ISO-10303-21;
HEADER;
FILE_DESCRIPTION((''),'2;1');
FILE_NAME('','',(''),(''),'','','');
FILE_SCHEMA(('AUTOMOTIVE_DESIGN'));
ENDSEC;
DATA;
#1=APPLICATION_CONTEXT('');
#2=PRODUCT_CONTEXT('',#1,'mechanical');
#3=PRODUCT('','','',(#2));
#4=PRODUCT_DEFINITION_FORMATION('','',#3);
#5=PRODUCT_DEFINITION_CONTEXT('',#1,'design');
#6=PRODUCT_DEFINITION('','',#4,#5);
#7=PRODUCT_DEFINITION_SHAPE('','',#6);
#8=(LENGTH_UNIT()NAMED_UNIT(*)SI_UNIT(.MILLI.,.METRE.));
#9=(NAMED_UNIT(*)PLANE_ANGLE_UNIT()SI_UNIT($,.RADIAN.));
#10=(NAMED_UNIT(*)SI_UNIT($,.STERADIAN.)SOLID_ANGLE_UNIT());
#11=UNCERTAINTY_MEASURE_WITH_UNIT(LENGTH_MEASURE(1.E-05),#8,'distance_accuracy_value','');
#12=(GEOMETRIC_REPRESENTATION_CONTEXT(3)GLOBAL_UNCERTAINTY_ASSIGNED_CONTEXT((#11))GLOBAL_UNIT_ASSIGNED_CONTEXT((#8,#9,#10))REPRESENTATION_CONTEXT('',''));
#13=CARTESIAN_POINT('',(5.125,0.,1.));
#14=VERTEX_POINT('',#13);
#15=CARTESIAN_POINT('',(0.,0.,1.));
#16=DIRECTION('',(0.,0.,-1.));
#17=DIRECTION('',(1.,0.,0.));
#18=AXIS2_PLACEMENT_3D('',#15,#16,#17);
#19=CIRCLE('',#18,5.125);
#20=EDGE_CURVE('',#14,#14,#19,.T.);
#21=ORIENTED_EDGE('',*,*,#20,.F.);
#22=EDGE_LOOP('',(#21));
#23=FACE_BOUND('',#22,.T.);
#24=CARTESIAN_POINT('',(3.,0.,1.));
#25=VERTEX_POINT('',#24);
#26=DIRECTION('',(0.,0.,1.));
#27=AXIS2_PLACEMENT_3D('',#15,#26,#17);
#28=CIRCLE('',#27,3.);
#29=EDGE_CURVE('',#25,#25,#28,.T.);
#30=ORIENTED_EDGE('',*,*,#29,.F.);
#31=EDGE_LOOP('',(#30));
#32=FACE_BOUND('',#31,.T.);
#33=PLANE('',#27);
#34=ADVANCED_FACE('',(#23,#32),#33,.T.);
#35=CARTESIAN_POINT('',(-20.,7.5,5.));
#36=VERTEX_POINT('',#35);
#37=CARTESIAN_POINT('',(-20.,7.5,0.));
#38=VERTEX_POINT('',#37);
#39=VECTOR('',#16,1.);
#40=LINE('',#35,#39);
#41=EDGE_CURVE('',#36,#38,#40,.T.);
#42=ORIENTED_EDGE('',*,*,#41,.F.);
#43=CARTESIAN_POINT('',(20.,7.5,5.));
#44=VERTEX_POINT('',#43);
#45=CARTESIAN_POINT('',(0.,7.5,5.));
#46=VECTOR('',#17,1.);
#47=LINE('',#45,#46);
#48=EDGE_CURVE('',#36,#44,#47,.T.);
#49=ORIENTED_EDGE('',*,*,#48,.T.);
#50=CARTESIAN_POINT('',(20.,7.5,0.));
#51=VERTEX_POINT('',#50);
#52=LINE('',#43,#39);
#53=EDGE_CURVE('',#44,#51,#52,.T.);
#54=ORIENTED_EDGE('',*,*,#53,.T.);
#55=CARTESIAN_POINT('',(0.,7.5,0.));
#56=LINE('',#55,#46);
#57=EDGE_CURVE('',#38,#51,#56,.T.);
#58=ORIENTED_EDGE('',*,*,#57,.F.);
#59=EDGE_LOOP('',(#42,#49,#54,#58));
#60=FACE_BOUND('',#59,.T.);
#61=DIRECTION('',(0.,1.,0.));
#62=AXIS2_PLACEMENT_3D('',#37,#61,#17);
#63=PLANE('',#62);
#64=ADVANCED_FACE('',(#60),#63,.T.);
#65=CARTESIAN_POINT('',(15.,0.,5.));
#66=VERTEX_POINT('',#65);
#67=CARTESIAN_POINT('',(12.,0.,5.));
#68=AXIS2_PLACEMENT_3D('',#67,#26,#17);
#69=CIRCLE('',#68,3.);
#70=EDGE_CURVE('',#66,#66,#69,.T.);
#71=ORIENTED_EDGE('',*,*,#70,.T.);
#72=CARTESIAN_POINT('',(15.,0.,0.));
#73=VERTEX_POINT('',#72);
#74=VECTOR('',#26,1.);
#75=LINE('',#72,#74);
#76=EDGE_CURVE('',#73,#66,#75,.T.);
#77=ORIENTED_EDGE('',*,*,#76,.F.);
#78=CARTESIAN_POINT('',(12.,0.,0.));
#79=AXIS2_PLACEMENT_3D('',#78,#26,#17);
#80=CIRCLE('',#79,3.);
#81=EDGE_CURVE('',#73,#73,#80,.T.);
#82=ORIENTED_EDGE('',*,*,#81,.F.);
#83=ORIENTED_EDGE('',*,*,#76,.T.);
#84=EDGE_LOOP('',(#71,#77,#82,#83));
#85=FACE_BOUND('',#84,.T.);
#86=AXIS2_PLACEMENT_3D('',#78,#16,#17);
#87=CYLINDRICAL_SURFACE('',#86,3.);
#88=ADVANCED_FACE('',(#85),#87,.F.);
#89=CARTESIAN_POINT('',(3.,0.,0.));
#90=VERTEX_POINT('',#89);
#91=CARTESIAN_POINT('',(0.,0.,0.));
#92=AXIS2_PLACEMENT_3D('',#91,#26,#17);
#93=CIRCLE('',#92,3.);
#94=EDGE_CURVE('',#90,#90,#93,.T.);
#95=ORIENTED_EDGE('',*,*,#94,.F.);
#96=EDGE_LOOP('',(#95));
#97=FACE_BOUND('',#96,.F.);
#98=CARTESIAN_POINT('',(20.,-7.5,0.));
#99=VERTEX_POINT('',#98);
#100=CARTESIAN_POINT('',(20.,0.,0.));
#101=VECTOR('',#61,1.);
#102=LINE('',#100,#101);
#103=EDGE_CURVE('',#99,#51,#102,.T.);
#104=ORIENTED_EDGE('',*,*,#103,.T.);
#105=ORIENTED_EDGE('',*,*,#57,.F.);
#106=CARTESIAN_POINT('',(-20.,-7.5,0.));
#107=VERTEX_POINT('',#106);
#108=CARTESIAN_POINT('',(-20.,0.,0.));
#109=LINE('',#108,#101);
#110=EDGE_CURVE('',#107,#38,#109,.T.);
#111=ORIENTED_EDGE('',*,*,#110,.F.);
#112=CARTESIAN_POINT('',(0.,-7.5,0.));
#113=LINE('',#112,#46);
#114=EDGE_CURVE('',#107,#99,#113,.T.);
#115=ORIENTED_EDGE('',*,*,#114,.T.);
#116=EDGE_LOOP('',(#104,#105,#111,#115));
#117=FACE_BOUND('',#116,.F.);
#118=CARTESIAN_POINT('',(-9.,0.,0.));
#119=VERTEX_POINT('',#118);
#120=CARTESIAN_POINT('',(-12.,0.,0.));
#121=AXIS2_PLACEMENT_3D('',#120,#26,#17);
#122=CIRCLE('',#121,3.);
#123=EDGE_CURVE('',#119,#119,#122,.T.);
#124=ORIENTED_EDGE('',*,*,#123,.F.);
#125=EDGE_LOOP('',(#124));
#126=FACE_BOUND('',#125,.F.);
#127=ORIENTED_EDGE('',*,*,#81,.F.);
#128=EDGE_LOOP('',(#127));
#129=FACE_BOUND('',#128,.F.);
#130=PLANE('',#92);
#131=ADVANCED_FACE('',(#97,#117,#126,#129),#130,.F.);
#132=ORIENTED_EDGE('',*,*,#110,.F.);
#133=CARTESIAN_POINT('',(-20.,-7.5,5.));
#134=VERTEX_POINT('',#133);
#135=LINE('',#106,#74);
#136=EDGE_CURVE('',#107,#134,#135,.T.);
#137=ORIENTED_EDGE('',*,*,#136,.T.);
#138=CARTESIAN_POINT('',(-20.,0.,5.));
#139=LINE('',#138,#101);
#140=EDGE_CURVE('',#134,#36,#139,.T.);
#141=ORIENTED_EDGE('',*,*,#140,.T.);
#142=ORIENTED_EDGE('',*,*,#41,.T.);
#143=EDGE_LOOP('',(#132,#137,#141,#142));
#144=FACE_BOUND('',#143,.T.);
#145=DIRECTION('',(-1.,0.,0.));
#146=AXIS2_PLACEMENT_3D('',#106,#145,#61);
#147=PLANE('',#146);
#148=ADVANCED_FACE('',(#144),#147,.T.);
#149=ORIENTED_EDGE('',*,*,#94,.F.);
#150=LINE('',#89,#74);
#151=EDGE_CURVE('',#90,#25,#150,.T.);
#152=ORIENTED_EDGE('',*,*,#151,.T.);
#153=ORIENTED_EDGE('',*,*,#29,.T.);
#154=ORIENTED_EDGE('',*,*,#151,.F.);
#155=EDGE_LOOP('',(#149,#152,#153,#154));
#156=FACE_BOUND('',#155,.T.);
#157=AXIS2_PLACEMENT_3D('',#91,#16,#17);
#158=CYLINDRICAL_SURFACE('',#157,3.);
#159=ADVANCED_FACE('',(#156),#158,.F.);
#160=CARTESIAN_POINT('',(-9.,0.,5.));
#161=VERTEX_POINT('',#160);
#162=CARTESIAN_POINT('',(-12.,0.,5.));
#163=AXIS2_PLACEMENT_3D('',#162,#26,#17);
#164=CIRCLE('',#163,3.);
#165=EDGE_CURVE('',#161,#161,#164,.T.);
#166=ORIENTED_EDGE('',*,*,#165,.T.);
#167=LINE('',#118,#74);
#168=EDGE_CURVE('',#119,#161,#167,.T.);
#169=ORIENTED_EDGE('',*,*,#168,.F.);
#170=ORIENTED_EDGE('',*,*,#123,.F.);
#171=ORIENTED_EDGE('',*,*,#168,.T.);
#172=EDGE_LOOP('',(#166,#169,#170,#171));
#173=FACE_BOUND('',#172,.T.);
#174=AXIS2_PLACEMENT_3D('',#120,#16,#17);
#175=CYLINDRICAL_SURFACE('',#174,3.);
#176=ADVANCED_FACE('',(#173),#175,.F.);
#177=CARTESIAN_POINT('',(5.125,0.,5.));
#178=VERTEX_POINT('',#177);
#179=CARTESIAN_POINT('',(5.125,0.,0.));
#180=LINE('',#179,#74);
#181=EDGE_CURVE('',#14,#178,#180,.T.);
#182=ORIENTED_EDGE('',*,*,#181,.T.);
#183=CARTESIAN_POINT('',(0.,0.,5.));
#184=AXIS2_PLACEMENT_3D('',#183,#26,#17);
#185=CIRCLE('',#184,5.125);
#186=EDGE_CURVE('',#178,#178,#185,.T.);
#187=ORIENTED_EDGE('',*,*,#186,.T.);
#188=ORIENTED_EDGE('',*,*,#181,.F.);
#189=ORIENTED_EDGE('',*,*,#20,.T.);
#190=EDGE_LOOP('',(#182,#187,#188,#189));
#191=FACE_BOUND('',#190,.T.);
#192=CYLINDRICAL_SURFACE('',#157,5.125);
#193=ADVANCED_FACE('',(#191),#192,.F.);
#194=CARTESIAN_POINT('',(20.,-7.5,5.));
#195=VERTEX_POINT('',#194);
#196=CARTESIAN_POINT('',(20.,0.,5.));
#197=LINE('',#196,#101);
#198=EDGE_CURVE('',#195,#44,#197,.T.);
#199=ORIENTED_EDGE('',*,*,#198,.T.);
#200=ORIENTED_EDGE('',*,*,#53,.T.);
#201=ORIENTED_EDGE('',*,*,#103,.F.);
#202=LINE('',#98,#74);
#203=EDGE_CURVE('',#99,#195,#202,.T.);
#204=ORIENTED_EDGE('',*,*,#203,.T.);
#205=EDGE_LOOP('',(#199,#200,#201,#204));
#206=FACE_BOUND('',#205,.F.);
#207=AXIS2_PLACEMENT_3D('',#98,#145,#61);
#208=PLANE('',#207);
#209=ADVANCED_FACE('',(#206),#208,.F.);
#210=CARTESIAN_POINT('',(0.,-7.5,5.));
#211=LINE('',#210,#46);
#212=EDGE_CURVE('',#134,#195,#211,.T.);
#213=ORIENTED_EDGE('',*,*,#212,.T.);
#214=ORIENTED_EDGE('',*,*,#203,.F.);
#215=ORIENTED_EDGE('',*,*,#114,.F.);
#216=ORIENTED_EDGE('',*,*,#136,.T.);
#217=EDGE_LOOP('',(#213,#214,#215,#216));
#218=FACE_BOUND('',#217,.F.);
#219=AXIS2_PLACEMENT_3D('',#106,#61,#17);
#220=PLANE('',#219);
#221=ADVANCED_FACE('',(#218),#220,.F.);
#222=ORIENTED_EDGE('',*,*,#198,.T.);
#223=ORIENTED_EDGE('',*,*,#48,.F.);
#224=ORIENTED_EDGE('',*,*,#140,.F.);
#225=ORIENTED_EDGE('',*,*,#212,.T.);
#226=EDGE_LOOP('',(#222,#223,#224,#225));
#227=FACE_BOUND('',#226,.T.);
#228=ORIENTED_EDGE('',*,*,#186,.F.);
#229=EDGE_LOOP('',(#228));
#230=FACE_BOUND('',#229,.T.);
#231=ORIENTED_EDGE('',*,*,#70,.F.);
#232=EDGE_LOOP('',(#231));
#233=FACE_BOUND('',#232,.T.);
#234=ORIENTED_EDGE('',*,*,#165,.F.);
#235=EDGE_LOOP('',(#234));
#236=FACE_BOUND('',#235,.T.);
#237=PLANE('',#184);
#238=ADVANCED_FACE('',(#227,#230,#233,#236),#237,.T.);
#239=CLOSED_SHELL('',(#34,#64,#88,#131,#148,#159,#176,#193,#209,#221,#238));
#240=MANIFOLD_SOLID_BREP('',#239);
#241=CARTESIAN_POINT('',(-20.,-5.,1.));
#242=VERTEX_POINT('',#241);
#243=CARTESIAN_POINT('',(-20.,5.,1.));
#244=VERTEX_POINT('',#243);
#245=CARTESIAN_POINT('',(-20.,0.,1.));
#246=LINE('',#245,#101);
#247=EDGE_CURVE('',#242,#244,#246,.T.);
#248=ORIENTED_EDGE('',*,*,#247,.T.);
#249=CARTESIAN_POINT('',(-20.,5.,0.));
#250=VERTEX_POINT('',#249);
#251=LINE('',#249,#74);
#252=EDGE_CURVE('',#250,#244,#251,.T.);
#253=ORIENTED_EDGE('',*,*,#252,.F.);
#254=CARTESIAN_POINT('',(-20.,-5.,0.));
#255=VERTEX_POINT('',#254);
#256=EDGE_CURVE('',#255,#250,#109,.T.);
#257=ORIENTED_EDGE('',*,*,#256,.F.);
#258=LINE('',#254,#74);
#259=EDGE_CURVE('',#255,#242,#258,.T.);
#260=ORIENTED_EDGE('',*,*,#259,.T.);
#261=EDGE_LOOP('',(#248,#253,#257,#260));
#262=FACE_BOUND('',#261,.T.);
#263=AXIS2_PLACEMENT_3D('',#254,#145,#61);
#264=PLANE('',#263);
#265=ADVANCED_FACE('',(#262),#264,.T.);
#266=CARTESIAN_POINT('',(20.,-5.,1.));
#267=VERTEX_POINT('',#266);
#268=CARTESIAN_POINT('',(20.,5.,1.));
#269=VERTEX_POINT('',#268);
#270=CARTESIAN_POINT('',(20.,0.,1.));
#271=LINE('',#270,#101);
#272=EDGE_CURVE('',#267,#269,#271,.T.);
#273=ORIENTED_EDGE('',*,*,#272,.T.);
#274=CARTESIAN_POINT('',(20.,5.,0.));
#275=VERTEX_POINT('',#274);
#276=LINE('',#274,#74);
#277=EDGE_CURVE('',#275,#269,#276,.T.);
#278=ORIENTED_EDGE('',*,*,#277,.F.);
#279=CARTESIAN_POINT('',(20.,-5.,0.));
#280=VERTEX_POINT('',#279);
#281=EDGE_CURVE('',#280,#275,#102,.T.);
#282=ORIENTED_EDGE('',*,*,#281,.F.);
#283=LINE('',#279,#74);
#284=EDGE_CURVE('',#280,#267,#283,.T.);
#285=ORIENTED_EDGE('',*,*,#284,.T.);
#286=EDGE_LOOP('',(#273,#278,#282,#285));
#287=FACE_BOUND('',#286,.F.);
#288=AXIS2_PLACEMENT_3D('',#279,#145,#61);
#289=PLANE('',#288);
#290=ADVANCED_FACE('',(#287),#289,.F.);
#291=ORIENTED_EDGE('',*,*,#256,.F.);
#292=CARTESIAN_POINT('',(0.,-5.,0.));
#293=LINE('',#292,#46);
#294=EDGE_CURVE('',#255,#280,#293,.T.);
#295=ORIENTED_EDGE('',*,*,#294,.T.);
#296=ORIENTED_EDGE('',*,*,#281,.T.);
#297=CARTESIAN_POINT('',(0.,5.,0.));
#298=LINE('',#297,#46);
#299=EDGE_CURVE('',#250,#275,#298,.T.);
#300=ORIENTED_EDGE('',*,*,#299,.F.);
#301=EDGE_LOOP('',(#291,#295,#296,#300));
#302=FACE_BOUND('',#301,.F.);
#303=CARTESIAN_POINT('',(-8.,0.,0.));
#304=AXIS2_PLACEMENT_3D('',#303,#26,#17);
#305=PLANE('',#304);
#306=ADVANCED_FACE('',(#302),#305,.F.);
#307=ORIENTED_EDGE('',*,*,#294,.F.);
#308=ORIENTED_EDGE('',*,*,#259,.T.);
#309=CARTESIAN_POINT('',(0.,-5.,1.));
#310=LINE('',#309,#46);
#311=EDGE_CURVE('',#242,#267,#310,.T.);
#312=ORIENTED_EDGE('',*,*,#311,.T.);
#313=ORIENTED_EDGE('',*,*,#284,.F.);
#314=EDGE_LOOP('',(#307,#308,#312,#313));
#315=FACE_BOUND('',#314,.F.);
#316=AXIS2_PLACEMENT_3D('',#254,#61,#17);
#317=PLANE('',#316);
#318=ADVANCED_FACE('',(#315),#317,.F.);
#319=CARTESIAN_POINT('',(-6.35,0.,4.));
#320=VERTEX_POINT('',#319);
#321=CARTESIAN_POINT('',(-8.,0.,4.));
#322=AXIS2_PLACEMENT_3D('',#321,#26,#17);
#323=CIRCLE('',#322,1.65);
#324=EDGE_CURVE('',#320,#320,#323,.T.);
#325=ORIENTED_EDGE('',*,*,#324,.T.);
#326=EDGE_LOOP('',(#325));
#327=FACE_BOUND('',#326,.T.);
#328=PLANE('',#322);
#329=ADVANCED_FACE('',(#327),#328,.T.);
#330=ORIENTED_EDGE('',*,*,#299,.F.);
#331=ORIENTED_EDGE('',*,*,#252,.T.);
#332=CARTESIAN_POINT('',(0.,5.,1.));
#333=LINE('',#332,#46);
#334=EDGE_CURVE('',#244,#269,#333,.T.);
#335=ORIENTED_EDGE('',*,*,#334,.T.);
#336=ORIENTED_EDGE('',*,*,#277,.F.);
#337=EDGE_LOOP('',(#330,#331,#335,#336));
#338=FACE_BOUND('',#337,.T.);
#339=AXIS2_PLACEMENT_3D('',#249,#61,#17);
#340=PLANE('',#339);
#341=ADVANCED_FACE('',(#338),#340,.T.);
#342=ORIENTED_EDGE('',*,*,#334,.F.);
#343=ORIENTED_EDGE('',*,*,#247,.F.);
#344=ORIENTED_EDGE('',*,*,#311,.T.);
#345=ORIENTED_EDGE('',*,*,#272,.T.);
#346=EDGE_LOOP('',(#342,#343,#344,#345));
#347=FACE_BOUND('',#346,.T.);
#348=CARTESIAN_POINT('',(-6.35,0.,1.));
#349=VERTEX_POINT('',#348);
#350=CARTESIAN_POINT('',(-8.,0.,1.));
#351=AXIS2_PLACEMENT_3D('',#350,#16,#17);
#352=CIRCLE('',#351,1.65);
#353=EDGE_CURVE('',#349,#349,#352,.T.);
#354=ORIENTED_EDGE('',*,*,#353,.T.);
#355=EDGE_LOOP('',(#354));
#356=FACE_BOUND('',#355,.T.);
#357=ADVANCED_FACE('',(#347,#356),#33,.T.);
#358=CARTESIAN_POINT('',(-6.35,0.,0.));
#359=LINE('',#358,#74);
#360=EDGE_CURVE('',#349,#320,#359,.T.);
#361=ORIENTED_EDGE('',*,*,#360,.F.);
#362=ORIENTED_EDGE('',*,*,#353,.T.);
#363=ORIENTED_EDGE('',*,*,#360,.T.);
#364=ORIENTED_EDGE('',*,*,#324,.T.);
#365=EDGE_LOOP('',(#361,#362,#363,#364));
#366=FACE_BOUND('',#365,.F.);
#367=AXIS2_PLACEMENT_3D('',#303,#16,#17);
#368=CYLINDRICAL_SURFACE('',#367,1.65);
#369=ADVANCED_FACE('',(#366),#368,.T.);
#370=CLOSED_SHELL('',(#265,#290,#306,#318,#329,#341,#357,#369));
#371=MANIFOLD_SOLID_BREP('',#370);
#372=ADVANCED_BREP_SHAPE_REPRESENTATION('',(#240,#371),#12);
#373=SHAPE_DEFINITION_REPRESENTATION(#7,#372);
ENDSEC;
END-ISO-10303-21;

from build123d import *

# Parameters (mm, degrees)
F0_W     = 40
F0_H     = 15
F0_R     = 3
F0_R_2   = 5.125
F1_DEPTH = 1
F2_DEPTH = 5
F3_W     = 40
F3_H     = 10
F3_R     = 1.65
F4_DEPTH = 1
F5_DEPTH = 4


with BuildPart() as f1:
    # F0 (on Top) → F1 (new body)
    with BuildSketch(Plane.XY):
        Rectangle(F0_W, F0_H)
        with Locations((-12, 0)):
            Circle(F0_R, mode=Mode.SUBTRACT)
        Circle(F0_R_2, mode=Mode.SUBTRACT)
        with Locations((12, 0)):
            Circle(F0_R, mode=Mode.SUBTRACT)
        Circle(F0_R_2)
        Circle(F0_R, mode=Mode.SUBTRACT)
    extrude(amount=F1_DEPTH)

    # F0 (on Top) → F2 (join)
    with BuildSketch(Plane.XY):
        Rectangle(F0_W, F0_H)
        with Locations((-12, 0)):
            Circle(F0_R, mode=Mode.SUBTRACT)
        Circle(F0_R_2, mode=Mode.SUBTRACT)
        with Locations((12, 0)):
            Circle(F0_R, mode=Mode.SUBTRACT)
    extrude(amount=F2_DEPTH)


with BuildPart() as f4:
    # F3 (on Top) → F4 (new body)
    with BuildSketch(Plane.XY):
        Rectangle(F3_W, F3_H)
        with Locations((-8, 0)):
            Circle(F3_R, mode=Mode.SUBTRACT)
        with Locations((-8, 0)):
            Circle(F3_R)
    extrude(amount=F4_DEPTH)

    # F3 (on Top) → F5 (join)
    with BuildSketch(Plane.XY):
        with Locations((-8, 0)):
            Circle(F3_R)
    extrude(amount=F5_DEPTH)


solid = Compound([f1.part, f4.part])
